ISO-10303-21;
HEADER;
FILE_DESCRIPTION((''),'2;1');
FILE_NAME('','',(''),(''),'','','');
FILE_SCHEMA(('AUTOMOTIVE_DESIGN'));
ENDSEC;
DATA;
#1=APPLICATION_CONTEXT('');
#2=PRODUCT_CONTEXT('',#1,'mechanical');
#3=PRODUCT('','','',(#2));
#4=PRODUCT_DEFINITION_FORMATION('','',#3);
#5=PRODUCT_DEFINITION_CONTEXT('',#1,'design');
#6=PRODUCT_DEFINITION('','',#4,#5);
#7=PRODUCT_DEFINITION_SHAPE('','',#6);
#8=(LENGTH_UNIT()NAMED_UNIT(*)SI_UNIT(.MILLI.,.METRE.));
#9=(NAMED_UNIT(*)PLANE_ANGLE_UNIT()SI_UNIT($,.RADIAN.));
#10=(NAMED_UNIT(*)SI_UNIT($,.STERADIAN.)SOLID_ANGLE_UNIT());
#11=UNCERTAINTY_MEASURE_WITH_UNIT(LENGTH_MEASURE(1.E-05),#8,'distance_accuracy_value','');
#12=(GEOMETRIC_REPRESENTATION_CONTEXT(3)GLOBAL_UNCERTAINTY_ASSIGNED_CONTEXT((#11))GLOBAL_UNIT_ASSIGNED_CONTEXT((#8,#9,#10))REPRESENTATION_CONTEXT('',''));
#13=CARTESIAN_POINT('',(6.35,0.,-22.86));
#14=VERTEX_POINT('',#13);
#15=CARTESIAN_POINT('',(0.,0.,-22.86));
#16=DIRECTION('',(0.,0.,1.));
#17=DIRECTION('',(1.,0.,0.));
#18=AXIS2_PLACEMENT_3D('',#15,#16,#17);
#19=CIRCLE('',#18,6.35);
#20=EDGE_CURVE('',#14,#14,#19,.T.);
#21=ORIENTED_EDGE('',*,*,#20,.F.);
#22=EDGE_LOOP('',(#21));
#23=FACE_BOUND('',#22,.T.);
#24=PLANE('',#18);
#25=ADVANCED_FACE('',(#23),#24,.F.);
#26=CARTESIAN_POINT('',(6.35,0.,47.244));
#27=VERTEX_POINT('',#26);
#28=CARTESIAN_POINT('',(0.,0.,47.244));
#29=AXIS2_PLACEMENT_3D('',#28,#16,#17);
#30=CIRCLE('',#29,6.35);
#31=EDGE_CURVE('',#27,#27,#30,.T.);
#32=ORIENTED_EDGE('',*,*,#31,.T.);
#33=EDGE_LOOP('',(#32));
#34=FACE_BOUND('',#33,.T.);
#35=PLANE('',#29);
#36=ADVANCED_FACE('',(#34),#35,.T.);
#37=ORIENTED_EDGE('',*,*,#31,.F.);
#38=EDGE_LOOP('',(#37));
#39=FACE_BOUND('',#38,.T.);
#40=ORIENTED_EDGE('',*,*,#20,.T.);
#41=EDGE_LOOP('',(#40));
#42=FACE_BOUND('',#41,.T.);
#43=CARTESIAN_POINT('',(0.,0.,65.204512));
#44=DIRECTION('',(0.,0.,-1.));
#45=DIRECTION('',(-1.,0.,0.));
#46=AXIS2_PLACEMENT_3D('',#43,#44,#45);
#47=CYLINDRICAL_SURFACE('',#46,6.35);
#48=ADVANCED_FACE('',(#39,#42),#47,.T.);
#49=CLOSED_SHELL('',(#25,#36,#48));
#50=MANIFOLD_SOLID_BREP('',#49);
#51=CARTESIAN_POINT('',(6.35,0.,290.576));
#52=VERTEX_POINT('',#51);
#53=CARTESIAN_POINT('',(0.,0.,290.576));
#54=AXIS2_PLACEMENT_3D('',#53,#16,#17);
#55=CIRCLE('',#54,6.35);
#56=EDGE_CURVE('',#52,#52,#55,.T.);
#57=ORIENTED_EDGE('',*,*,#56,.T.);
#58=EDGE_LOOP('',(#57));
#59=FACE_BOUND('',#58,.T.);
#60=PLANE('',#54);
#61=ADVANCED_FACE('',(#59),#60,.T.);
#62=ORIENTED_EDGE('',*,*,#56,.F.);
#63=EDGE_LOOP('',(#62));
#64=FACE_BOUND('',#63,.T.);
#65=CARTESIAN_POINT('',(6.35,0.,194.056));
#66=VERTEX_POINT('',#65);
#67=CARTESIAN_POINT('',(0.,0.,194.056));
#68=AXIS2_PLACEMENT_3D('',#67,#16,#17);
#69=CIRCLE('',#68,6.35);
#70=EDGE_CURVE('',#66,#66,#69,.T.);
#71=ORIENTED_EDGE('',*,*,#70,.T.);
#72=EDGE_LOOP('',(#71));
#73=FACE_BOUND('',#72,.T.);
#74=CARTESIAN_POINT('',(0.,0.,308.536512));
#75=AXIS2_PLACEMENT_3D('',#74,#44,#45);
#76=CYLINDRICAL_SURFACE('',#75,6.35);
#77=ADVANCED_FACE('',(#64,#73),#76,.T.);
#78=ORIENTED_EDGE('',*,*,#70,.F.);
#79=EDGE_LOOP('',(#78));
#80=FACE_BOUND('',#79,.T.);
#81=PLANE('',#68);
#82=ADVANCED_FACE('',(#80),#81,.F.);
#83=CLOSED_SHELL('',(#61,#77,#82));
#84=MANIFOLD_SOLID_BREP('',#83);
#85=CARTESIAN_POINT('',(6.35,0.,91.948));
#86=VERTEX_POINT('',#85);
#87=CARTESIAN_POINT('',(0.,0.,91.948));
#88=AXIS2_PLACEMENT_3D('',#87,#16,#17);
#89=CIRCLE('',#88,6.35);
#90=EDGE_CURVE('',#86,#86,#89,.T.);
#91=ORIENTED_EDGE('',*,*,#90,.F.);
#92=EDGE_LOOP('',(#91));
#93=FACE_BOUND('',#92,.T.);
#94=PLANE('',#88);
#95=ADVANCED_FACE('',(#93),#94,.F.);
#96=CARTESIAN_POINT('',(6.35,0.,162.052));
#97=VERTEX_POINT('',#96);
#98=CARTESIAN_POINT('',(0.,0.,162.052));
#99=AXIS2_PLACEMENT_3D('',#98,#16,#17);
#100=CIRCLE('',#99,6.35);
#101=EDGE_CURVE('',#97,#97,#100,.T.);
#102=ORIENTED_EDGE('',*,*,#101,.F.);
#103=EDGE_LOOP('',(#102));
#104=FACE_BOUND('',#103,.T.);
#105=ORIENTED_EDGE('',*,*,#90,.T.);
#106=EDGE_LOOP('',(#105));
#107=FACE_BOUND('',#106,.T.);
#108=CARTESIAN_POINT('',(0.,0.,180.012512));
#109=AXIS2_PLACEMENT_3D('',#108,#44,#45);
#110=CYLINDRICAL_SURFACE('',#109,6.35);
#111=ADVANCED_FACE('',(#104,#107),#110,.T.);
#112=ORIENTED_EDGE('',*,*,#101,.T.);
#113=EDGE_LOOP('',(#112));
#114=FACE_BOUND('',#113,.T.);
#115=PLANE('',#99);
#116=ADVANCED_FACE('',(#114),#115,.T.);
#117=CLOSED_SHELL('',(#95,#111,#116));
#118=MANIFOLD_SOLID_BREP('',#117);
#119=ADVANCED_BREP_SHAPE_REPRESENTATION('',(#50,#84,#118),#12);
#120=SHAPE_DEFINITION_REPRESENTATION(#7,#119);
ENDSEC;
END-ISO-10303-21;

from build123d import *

# Parameters (mm, degrees)
BOSS_EXTRUDE1_OUTLINE_R = 6.35
BOSS_EXTRUDE1_DEPTH     = 70.104
SKETCH3_R               = 6.35
BOSS_EXTRUDE2_DEPTH     = 70.104
SKETCH4_R               = 6.35
BOSS_EXTRUDE3_DEPTH     = 96.52


# Read off the part's stored shape, not the designer's step: Boss-Extrude1
with BuildPart() as part:
    # Boss-Extrude1 outline → Boss-Extrude1 (new body)
    with BuildSketch(Plane.XY.offset(-22.86)):
        Circle(BOSS_EXTRUDE1_OUTLINE_R)
    extrude(amount=BOSS_EXTRUDE1_DEPTH)


with BuildPart() as body_2:
    # Sketch3 → Boss-Extrude2 (new body)
    with BuildSketch(Plane.XY.offset(91.948)):
        Circle(SKETCH3_R)
    extrude(amount=BOSS_EXTRUDE2_DEPTH)


with BuildPart() as body_3:
    # Sketch4 → Boss-Extrude3 (new body)
    with BuildSketch(Plane.XY.offset(194.056)):
        Circle(SKETCH4_R)
    extrude(amount=BOSS_EXTRUDE3_DEPTH)


solid = Compound([part.part, body_2.part, body_3.part])
